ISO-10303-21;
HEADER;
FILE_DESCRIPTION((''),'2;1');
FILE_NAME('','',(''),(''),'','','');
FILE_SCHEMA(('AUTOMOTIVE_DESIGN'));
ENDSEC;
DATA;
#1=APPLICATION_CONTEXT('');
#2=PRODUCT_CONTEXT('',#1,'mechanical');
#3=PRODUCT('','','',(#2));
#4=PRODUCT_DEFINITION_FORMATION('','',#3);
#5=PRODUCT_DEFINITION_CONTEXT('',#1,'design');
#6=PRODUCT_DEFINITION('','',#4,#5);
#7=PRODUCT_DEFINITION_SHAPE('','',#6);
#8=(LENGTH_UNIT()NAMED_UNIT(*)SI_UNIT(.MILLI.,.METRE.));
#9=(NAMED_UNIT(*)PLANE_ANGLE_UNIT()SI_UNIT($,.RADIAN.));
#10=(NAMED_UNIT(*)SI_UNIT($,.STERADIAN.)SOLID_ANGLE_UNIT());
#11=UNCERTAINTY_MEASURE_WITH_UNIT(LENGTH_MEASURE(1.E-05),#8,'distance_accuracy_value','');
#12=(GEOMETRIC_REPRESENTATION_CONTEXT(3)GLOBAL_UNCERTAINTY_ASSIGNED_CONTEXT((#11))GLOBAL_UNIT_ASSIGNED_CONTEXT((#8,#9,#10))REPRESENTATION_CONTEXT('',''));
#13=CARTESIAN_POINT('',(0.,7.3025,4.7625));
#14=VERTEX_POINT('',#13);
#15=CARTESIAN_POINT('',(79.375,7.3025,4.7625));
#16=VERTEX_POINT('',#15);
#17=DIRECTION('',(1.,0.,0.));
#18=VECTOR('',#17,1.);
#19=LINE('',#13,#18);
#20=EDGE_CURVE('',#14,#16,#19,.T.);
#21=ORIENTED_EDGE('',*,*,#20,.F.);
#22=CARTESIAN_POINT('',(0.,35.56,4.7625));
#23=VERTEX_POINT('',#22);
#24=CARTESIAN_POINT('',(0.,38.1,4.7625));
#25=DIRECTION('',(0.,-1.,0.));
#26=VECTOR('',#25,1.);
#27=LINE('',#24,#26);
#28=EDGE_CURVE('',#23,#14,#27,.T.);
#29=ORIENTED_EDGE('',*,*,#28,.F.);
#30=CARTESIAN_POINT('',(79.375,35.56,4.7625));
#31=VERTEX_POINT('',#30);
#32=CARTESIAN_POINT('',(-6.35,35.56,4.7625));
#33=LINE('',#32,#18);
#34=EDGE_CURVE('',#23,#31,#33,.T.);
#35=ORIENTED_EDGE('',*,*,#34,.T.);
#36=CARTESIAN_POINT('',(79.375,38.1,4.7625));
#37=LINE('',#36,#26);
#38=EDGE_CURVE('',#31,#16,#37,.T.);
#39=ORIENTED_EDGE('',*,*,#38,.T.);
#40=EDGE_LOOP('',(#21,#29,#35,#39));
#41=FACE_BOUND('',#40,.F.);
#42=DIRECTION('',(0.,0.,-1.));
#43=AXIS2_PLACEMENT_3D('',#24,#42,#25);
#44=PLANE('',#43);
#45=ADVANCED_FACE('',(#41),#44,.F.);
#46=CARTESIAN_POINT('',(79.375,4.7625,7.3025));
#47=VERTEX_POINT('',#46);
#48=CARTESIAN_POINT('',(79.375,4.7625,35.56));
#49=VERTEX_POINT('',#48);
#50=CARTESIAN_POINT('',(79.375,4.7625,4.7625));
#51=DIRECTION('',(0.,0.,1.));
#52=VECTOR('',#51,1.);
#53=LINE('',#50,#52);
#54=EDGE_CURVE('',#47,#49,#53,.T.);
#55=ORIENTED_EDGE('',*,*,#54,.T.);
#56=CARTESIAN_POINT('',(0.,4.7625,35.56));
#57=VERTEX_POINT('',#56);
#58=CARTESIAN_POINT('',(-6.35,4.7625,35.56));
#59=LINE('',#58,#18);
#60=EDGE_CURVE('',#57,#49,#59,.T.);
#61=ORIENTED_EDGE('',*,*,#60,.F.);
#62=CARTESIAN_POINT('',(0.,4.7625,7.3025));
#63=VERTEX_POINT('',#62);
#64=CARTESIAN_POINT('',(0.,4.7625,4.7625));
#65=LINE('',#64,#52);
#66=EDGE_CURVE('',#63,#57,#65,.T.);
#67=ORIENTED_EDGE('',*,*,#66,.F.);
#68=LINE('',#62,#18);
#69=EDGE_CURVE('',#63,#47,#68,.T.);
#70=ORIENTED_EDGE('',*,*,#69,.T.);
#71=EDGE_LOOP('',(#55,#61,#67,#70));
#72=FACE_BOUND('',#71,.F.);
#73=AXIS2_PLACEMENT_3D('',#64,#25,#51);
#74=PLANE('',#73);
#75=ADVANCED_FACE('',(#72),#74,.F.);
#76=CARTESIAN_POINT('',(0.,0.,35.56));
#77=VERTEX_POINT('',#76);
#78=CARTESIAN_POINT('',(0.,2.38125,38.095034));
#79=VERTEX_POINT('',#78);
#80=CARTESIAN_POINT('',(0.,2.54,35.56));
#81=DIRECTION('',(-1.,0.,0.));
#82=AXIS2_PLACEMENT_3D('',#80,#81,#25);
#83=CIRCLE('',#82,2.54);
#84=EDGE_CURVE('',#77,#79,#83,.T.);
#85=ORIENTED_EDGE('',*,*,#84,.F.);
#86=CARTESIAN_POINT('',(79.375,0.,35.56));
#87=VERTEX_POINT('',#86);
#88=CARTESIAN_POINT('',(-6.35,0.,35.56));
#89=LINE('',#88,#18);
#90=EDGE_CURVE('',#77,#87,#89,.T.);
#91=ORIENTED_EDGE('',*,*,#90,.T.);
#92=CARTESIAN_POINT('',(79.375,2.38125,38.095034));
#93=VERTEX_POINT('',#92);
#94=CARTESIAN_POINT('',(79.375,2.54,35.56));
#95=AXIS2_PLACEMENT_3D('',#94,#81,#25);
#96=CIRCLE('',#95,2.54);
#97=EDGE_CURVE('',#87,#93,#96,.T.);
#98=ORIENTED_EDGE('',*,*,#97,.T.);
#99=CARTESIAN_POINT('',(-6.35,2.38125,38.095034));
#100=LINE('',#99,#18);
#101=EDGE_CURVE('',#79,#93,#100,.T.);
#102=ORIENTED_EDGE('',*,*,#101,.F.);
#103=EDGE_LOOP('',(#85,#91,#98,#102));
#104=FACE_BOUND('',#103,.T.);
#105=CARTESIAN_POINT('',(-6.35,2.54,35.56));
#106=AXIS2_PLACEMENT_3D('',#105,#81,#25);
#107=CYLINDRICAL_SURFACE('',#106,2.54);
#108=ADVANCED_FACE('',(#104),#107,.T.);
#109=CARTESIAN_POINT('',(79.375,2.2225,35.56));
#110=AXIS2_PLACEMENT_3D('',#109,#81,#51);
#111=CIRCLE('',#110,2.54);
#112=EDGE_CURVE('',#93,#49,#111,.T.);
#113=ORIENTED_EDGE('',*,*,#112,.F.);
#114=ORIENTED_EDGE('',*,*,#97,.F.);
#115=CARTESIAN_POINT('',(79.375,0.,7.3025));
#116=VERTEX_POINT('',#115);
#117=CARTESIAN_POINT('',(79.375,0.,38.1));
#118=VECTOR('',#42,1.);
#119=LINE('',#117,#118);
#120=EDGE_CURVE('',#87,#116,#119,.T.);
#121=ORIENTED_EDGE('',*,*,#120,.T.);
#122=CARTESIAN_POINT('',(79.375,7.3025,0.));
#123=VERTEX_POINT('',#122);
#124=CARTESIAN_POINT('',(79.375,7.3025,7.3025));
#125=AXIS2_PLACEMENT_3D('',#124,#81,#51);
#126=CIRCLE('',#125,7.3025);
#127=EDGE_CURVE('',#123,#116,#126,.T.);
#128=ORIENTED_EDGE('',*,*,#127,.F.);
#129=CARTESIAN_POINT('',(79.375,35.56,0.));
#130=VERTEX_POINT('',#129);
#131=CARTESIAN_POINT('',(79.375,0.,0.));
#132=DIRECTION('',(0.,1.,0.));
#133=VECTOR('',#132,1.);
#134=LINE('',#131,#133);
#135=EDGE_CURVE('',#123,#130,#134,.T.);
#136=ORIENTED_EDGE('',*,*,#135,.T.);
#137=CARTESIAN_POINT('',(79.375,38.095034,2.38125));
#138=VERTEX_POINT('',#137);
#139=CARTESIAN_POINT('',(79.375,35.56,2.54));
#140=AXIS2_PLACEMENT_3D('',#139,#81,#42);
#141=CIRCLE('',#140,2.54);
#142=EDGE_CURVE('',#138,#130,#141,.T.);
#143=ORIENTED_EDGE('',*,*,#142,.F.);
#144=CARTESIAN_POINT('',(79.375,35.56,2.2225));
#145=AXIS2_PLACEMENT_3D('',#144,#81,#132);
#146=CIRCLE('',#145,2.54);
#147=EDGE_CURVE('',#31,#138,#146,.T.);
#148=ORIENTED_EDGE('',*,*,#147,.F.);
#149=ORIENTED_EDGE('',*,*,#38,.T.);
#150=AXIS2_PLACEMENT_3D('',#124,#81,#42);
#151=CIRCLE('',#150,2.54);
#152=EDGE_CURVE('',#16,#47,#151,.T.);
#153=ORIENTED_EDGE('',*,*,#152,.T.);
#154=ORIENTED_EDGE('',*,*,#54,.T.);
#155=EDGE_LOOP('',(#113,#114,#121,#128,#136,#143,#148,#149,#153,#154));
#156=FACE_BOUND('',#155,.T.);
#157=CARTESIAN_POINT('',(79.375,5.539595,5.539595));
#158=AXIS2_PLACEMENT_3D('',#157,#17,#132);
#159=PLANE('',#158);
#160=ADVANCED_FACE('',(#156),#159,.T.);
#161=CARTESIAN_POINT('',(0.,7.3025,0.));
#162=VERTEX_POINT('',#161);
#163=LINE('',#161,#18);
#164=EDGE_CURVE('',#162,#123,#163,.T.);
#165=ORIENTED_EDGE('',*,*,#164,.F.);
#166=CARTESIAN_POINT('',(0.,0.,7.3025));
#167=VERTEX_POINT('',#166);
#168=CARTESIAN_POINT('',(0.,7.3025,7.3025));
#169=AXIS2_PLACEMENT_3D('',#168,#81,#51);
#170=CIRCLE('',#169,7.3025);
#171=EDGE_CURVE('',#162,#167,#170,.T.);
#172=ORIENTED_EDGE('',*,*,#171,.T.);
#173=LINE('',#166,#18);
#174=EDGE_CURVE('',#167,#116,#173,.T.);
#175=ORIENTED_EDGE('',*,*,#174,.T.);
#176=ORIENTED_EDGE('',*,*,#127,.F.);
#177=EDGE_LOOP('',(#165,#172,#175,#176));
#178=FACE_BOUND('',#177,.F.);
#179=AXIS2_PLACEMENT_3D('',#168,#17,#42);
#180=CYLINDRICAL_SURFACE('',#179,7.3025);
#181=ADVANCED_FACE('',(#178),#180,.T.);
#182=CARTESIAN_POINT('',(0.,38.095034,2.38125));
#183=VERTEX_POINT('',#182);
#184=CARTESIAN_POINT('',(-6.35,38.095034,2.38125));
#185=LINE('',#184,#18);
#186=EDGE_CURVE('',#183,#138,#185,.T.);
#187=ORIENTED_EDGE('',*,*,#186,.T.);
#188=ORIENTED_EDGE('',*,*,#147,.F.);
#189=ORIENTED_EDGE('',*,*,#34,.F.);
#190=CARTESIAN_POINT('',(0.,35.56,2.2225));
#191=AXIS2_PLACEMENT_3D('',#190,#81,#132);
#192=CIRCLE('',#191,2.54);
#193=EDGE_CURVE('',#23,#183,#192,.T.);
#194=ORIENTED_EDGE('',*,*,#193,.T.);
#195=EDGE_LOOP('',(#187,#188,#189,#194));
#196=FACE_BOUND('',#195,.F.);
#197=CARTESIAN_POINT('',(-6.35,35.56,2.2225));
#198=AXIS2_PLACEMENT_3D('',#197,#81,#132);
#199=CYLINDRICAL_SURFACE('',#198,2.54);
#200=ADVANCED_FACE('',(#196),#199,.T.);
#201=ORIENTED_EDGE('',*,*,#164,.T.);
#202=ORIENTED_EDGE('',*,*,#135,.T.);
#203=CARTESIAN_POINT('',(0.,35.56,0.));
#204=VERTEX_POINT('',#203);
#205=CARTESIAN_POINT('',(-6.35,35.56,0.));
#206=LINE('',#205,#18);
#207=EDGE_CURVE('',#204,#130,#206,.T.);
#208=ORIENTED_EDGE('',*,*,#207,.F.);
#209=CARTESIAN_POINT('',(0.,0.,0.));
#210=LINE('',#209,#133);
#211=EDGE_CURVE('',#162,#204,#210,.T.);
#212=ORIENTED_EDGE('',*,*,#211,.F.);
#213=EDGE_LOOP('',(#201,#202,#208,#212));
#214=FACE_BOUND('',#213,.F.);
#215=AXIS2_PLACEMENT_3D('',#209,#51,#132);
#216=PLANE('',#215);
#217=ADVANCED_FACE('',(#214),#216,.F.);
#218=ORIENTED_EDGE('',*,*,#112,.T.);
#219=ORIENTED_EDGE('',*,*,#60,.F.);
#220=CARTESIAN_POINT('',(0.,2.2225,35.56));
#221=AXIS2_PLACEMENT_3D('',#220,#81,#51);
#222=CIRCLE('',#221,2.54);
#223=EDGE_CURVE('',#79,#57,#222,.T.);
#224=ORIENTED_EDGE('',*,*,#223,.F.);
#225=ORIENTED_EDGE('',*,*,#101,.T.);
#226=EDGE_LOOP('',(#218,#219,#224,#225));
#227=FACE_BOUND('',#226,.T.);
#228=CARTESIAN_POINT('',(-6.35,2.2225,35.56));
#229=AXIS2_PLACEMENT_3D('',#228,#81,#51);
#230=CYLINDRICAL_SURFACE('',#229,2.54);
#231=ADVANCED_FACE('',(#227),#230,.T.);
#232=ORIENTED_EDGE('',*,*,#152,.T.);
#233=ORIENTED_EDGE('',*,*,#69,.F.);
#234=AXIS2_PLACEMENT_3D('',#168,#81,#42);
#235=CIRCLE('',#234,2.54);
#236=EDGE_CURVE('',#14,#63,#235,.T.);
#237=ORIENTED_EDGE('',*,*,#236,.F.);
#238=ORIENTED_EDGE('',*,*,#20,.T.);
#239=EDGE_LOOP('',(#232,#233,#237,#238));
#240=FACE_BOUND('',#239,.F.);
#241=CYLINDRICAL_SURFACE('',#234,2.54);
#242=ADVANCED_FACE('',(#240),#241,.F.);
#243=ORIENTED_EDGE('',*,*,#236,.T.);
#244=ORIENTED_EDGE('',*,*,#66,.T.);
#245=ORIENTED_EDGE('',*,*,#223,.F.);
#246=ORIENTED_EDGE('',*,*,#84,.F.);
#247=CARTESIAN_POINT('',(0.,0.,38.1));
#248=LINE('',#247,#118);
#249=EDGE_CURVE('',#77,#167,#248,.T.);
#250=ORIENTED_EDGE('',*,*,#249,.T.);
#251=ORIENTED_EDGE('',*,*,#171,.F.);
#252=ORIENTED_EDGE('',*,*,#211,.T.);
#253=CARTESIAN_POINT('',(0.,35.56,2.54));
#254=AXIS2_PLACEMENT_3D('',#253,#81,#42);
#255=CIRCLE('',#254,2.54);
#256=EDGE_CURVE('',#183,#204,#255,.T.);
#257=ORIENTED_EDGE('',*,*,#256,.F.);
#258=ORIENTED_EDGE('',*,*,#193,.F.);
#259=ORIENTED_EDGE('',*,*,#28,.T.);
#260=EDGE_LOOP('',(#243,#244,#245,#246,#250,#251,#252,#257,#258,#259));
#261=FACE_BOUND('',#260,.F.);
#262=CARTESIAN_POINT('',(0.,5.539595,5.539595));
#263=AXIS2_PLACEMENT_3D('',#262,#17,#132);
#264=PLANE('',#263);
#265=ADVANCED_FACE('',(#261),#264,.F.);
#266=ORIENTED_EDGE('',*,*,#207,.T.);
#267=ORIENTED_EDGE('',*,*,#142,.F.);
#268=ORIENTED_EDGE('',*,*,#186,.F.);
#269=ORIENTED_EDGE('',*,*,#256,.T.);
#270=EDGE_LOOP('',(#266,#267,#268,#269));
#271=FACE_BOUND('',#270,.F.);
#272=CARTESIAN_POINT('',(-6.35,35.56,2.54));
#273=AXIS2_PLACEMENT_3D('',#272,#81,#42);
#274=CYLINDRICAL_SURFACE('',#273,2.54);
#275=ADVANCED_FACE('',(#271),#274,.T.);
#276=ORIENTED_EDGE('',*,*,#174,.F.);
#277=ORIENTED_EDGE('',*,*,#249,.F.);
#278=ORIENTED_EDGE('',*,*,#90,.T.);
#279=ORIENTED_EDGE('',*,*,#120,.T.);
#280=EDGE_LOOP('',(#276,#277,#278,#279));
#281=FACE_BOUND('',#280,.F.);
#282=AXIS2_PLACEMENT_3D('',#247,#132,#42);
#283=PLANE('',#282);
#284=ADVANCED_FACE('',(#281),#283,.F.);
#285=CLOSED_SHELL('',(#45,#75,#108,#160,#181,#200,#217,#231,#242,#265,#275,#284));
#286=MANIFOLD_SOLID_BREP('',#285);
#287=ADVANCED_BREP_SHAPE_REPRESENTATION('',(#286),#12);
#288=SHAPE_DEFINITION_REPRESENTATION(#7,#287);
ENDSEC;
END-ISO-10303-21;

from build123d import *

# Parameters (mm, degrees)
F1_DEPTH    = 79.375
F2_T1_DEPTH = 79.375
F2_T3_DEPTH = 92.075
F3_R        = 7.3025


# Not quite as in the source:
# - a fillet or chamfer that OpenCascade refuses, or shapes differently, is made with other operations: its cross-section is extruded or revolved along the edge and cut away or added


with BuildPart() as f1:
    # F0 (on Right) → F1 (new body)
    with BuildSketch(Plane.YZ):
        Polygon((0, 38.1), (0, 0), (38.1, 0), (38.1, 4.7625), (4.7625, 4.7625), (4.7625, 38.1), align=None)
    extrude(amount=F1_DEPTH)

    # F2: fillet of radius 2.54 on 5 edges, made by hand

    # F2_s2 → F2_t1 (join)
    with BuildSketch(Plane.YZ):
        with BuildLine():
            ThreePointArc((7.3025, 4.7625), (5.5064487758, 5.5064487758), (4.7625, 7.3025))
            Line((4.7625, 7.3025), (4.7625, 4.7625))
            Line((4.7625, 4.7625), (7.3025, 4.7625))
        make_face()
    extrude(amount=F2_T1_DEPTH)

    # F2_s4 → F2_t3 (cut)
    with BuildSketch(Plane.YZ.offset(-6.35)):
        with BuildLine():
            ThreePointArc((2.2225, 38.1), (4.0185512242, 37.3560512242), (4.7625, 35.56))
            Line((4.7625, 35.56), (4.7625, 38.1))
            Line((4.7625, 38.1), (2.2225, 38.1))
        make_face()
        with BuildLine():
            ThreePointArc((0, 35.56), (0.7439487758, 37.3560512242), (2.54, 38.1))
            Line((2.54, 38.1), (0, 38.1))
            Line((0, 38.1), (0, 35.56))
        make_face()
        with BuildLine():
            ThreePointArc((38.1, 2.2225), (37.3560512242, 4.0185512242), (35.56, 4.7625))
            Line((35.56, 4.7625), (38.1, 4.7625))
            Line((38.1, 4.7625), (38.1, 2.2225))
        make_face()
        with BuildLine():
            ThreePointArc((35.56, 0), (37.3560512242, 0.7439487758), (38.1, 2.54))
            Line((38.1, 2.54), (38.1, 0))
            Line((38.1, 0), (35.56, 0))
        make_face()
    extrude(amount=F2_T3_DEPTH, mode=Mode.SUBTRACT)

    # F3
    f3_edges = [f1.edges().sort_by_distance(p)[0] for p in [
        (39.6875, 0, 0),
    ]]
    fillet(f3_edges, radius=F3_R)


solid = f1.part
